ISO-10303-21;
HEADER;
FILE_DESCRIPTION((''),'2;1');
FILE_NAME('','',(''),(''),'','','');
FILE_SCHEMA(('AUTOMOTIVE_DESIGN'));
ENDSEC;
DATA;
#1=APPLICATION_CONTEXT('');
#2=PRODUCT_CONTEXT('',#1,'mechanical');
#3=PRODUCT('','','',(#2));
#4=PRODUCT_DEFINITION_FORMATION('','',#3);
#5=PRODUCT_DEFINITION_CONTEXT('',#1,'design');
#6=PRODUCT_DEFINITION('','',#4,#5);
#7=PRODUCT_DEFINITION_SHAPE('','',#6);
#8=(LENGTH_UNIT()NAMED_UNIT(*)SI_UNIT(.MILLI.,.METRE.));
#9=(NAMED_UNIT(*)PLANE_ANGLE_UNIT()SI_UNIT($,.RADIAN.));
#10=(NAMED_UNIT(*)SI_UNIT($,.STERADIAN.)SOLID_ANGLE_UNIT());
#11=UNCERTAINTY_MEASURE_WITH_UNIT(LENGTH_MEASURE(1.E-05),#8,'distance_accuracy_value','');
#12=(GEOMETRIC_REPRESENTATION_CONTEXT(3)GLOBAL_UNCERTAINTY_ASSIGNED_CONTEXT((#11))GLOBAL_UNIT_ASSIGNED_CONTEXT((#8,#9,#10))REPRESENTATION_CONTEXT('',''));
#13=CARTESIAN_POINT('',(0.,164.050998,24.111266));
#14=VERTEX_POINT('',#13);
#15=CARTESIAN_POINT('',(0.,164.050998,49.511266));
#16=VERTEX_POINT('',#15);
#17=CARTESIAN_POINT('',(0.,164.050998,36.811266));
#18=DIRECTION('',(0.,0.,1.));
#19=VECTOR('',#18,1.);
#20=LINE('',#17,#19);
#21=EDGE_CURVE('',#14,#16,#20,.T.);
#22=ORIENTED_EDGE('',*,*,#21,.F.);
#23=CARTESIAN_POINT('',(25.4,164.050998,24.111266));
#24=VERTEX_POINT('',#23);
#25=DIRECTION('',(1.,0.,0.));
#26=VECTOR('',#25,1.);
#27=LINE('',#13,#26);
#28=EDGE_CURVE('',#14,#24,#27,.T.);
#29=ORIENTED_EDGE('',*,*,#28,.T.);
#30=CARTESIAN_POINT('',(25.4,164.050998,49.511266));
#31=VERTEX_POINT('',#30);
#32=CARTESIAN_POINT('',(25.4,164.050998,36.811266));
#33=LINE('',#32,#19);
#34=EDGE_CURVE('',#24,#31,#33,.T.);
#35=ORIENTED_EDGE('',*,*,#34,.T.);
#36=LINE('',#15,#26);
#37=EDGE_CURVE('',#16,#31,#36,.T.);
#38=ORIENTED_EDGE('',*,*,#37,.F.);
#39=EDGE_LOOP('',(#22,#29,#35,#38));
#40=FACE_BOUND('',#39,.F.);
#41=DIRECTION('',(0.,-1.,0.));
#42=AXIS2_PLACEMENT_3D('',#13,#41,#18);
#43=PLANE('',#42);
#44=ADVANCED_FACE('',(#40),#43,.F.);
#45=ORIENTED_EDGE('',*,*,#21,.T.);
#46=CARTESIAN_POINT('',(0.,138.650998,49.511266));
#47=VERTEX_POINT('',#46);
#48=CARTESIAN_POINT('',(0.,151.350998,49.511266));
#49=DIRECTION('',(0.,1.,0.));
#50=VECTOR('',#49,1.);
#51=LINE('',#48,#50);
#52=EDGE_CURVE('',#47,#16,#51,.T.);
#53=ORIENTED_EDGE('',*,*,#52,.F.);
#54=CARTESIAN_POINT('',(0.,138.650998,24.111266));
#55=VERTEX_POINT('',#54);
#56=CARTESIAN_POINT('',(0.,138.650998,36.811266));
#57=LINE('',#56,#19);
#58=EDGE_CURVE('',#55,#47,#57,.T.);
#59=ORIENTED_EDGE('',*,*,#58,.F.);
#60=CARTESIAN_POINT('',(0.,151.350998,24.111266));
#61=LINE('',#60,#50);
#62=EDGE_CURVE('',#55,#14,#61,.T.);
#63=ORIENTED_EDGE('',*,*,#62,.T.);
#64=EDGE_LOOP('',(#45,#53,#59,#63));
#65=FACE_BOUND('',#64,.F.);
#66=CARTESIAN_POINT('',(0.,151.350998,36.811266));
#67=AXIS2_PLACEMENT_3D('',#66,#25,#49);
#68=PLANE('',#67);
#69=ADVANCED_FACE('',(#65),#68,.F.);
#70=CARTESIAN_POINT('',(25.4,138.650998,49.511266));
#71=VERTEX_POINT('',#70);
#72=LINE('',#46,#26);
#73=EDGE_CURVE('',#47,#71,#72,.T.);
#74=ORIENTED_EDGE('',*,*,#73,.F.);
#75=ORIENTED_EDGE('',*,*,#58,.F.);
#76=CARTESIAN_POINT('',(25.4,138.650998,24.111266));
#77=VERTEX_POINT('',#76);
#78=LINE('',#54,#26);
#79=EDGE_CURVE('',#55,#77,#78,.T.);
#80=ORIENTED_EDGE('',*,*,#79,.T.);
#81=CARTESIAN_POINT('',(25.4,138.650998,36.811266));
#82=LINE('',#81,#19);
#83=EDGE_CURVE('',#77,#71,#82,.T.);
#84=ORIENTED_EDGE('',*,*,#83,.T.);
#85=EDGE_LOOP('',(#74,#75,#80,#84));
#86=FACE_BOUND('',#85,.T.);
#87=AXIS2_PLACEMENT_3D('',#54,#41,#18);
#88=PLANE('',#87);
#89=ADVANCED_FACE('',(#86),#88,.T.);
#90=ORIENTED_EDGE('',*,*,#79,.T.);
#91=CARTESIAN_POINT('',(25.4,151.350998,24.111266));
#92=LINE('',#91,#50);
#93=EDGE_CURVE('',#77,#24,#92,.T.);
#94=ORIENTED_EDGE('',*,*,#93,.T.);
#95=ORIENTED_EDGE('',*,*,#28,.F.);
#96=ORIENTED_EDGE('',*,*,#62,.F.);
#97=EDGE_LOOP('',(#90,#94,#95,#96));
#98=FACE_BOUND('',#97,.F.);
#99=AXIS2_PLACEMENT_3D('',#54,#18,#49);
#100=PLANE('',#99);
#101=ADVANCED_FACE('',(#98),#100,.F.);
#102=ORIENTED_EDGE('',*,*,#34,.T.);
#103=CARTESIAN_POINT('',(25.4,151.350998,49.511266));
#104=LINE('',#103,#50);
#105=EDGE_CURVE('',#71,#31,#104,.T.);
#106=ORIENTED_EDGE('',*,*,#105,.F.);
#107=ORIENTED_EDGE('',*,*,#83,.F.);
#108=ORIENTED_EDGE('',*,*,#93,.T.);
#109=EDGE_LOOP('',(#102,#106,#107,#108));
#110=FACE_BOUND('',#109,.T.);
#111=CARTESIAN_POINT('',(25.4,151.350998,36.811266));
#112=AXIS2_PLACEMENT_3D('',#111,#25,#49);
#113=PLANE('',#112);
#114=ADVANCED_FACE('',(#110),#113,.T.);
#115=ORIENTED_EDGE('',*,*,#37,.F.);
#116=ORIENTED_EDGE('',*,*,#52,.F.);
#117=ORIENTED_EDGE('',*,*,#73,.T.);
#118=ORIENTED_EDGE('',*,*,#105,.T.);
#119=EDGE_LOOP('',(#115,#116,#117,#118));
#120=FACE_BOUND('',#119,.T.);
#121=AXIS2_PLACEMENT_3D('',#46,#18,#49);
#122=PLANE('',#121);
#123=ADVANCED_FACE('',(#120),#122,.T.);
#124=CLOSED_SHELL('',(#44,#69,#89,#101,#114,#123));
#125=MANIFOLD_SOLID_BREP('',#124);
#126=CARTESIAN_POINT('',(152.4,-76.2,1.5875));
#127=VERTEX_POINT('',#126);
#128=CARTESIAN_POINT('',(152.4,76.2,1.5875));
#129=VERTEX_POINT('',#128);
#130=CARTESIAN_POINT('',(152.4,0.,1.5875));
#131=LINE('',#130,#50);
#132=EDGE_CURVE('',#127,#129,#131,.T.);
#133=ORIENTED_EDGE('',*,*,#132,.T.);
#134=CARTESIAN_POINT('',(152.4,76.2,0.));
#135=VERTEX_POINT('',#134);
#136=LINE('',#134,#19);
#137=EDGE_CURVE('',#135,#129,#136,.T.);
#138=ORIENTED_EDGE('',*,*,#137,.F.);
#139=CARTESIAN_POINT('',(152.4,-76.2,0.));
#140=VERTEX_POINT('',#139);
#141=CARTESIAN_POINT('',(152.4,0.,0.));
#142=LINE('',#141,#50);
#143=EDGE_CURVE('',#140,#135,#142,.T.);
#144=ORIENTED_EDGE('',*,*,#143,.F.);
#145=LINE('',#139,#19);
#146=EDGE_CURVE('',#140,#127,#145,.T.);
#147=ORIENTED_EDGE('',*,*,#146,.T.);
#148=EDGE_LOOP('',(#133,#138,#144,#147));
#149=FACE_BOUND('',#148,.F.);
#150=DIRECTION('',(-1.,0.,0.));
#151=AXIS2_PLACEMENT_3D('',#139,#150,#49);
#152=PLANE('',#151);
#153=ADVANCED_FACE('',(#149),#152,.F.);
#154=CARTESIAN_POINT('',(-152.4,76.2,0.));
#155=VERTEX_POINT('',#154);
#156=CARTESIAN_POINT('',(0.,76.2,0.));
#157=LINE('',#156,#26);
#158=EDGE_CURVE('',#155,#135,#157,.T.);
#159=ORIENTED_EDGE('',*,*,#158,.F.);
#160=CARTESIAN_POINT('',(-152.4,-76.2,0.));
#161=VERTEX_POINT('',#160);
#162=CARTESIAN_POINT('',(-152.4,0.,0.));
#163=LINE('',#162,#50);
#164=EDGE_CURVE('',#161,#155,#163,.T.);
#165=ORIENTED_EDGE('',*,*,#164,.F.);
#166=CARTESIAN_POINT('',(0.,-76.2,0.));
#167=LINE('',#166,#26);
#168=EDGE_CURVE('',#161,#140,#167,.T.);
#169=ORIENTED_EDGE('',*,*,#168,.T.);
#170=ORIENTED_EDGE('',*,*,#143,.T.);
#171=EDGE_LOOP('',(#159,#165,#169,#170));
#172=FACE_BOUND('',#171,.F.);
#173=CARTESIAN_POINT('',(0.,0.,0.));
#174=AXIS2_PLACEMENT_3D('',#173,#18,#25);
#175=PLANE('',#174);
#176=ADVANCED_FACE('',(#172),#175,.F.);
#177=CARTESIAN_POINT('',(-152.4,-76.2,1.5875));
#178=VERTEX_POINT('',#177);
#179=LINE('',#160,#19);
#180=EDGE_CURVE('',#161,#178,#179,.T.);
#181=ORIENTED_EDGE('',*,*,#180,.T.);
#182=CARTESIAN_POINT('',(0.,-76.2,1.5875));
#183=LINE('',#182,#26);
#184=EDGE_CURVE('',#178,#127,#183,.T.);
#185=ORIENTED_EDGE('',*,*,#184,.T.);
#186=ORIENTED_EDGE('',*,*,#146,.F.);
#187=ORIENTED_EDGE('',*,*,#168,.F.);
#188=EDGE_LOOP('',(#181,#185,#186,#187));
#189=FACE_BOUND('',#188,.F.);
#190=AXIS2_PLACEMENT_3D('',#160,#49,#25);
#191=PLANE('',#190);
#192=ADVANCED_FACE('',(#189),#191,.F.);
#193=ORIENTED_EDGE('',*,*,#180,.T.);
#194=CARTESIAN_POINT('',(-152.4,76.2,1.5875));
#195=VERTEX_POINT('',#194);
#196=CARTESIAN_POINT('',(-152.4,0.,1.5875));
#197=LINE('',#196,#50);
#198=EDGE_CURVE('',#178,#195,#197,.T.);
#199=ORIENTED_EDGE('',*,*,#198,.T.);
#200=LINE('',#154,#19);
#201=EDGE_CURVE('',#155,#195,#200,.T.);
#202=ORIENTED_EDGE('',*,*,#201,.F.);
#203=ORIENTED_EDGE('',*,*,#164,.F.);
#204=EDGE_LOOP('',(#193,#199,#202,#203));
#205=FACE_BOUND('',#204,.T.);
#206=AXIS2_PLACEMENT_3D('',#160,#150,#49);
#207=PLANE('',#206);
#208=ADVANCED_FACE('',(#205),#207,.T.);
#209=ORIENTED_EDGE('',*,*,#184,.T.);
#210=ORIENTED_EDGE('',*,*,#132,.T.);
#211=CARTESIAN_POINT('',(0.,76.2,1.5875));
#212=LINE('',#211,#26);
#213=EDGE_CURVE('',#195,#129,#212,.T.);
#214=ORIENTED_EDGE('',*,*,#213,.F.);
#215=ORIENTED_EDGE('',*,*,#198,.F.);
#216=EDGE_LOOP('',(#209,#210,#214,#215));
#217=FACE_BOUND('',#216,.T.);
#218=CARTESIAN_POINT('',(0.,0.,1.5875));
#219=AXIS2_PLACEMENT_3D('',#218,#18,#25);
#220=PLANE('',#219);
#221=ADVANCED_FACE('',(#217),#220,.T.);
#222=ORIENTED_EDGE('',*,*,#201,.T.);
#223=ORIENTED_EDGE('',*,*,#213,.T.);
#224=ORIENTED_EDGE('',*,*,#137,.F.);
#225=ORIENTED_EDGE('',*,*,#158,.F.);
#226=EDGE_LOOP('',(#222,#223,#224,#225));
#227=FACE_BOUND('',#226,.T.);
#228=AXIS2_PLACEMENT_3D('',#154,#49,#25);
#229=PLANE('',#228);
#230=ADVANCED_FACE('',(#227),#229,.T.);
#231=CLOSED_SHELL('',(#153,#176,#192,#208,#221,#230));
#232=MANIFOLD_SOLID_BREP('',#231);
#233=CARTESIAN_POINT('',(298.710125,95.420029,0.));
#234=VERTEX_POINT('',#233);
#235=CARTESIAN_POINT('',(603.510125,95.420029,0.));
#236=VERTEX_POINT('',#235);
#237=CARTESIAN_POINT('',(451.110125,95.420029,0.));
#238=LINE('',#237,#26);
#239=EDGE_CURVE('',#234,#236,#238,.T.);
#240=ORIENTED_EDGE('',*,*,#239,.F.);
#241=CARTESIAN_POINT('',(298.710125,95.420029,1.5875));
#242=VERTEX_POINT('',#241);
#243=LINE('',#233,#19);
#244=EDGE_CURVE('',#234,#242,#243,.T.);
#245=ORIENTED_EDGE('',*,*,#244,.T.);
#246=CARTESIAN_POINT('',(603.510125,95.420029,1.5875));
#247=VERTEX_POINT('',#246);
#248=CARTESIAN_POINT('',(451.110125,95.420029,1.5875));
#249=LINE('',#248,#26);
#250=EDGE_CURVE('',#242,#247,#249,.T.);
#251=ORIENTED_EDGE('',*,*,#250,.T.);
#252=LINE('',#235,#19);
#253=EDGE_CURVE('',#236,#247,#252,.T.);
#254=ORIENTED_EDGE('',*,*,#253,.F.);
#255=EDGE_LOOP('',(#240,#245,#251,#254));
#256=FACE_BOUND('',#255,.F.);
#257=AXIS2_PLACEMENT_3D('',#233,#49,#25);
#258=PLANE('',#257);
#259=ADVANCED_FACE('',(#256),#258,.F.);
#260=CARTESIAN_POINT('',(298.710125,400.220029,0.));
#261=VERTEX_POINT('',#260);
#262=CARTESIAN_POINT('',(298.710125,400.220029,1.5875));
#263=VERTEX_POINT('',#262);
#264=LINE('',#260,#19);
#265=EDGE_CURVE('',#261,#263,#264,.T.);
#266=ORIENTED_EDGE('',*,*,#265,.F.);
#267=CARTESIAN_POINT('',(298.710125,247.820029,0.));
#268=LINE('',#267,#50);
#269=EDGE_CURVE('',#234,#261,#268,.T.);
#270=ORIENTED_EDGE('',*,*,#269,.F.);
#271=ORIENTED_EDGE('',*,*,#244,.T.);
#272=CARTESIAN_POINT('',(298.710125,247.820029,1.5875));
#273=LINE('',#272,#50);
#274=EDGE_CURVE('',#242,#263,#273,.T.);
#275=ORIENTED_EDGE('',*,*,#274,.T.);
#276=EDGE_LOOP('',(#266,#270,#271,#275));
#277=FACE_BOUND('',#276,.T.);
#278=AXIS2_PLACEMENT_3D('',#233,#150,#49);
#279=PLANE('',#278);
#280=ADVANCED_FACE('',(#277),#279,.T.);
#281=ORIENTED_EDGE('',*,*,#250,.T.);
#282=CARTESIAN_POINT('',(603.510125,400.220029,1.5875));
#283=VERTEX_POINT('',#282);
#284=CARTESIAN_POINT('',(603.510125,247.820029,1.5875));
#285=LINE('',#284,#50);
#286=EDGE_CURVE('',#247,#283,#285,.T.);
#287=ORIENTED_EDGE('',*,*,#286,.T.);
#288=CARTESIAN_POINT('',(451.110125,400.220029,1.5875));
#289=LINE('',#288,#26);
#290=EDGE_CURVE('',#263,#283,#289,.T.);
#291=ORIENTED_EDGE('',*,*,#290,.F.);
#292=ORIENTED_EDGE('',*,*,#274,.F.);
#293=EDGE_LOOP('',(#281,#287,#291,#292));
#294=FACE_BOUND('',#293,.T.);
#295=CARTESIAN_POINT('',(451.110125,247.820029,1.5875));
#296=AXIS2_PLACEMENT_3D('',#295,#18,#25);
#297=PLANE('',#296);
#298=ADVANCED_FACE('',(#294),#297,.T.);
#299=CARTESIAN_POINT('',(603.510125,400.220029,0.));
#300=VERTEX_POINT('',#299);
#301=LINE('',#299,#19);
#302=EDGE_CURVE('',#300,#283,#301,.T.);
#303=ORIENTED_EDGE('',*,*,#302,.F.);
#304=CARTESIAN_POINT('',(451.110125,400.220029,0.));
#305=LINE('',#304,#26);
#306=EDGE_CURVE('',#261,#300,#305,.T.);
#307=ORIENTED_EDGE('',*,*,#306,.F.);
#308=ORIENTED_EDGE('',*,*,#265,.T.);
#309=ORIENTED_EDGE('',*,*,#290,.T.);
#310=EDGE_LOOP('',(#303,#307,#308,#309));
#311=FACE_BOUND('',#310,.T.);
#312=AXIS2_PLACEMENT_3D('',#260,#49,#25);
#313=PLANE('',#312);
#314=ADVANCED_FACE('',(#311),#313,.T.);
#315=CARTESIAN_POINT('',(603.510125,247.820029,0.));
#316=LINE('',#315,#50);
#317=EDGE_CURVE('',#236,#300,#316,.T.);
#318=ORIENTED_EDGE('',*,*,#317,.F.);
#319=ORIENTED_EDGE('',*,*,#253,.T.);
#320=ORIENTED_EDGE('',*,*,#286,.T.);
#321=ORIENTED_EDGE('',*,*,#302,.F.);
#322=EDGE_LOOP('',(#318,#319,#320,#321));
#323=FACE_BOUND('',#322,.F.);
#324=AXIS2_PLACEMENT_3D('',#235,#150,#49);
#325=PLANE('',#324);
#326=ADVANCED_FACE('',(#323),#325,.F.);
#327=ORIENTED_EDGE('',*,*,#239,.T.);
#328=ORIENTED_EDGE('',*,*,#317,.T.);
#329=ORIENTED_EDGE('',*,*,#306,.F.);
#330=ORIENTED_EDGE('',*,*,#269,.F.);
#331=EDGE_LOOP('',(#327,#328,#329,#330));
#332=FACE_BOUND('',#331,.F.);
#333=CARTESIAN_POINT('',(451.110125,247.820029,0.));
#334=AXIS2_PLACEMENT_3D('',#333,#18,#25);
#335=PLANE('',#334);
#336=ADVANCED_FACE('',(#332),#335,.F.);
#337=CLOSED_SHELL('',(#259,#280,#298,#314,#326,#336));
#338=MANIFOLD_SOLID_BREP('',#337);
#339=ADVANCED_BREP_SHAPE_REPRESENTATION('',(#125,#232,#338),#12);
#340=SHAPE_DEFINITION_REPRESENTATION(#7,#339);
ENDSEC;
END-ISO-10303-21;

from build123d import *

# Parameters (mm, degrees)
F0_W     = 304.8
F0_H     = 152.4
F1_DEPTH = 1.5875
F2_W     = 304.8
F2_H     = 304.8
F3_DEPTH = 1.5875
F4_W     = 25.4
F4_H     = 25.4
F5_DEPTH = 25.4


# Not quite as in the source:
# - a length typed as a fraction of an inch, garbled in the dataset ("3 / 203.2 mm" for 3/8 in), is restored


with BuildPart() as f1:
    # F0 (on Top) → F1 (new body)
    with BuildSketch(Plane.XY):
        Rectangle(F0_W, F0_H)
    extrude(amount=F1_DEPTH)


with BuildPart() as f3:
    # F2 (on Top) → F3 (new body)
    with BuildSketch(Plane.XY):
        with Locations((451.110124588, 247.8200285587)):
            Rectangle(F2_W, F2_H)
    extrude(amount=F3_DEPTH)


with BuildPart() as f5:
    # F4 (on Right) → F5 (new body)
    with BuildSketch(Plane.YZ):
        with Locations((151.3509980978, 36.8112660944)):
            Rectangle(F4_W, F4_H)
    extrude(amount=F5_DEPTH)


solid = Compound([f1.part, f3.part, f5.part])
